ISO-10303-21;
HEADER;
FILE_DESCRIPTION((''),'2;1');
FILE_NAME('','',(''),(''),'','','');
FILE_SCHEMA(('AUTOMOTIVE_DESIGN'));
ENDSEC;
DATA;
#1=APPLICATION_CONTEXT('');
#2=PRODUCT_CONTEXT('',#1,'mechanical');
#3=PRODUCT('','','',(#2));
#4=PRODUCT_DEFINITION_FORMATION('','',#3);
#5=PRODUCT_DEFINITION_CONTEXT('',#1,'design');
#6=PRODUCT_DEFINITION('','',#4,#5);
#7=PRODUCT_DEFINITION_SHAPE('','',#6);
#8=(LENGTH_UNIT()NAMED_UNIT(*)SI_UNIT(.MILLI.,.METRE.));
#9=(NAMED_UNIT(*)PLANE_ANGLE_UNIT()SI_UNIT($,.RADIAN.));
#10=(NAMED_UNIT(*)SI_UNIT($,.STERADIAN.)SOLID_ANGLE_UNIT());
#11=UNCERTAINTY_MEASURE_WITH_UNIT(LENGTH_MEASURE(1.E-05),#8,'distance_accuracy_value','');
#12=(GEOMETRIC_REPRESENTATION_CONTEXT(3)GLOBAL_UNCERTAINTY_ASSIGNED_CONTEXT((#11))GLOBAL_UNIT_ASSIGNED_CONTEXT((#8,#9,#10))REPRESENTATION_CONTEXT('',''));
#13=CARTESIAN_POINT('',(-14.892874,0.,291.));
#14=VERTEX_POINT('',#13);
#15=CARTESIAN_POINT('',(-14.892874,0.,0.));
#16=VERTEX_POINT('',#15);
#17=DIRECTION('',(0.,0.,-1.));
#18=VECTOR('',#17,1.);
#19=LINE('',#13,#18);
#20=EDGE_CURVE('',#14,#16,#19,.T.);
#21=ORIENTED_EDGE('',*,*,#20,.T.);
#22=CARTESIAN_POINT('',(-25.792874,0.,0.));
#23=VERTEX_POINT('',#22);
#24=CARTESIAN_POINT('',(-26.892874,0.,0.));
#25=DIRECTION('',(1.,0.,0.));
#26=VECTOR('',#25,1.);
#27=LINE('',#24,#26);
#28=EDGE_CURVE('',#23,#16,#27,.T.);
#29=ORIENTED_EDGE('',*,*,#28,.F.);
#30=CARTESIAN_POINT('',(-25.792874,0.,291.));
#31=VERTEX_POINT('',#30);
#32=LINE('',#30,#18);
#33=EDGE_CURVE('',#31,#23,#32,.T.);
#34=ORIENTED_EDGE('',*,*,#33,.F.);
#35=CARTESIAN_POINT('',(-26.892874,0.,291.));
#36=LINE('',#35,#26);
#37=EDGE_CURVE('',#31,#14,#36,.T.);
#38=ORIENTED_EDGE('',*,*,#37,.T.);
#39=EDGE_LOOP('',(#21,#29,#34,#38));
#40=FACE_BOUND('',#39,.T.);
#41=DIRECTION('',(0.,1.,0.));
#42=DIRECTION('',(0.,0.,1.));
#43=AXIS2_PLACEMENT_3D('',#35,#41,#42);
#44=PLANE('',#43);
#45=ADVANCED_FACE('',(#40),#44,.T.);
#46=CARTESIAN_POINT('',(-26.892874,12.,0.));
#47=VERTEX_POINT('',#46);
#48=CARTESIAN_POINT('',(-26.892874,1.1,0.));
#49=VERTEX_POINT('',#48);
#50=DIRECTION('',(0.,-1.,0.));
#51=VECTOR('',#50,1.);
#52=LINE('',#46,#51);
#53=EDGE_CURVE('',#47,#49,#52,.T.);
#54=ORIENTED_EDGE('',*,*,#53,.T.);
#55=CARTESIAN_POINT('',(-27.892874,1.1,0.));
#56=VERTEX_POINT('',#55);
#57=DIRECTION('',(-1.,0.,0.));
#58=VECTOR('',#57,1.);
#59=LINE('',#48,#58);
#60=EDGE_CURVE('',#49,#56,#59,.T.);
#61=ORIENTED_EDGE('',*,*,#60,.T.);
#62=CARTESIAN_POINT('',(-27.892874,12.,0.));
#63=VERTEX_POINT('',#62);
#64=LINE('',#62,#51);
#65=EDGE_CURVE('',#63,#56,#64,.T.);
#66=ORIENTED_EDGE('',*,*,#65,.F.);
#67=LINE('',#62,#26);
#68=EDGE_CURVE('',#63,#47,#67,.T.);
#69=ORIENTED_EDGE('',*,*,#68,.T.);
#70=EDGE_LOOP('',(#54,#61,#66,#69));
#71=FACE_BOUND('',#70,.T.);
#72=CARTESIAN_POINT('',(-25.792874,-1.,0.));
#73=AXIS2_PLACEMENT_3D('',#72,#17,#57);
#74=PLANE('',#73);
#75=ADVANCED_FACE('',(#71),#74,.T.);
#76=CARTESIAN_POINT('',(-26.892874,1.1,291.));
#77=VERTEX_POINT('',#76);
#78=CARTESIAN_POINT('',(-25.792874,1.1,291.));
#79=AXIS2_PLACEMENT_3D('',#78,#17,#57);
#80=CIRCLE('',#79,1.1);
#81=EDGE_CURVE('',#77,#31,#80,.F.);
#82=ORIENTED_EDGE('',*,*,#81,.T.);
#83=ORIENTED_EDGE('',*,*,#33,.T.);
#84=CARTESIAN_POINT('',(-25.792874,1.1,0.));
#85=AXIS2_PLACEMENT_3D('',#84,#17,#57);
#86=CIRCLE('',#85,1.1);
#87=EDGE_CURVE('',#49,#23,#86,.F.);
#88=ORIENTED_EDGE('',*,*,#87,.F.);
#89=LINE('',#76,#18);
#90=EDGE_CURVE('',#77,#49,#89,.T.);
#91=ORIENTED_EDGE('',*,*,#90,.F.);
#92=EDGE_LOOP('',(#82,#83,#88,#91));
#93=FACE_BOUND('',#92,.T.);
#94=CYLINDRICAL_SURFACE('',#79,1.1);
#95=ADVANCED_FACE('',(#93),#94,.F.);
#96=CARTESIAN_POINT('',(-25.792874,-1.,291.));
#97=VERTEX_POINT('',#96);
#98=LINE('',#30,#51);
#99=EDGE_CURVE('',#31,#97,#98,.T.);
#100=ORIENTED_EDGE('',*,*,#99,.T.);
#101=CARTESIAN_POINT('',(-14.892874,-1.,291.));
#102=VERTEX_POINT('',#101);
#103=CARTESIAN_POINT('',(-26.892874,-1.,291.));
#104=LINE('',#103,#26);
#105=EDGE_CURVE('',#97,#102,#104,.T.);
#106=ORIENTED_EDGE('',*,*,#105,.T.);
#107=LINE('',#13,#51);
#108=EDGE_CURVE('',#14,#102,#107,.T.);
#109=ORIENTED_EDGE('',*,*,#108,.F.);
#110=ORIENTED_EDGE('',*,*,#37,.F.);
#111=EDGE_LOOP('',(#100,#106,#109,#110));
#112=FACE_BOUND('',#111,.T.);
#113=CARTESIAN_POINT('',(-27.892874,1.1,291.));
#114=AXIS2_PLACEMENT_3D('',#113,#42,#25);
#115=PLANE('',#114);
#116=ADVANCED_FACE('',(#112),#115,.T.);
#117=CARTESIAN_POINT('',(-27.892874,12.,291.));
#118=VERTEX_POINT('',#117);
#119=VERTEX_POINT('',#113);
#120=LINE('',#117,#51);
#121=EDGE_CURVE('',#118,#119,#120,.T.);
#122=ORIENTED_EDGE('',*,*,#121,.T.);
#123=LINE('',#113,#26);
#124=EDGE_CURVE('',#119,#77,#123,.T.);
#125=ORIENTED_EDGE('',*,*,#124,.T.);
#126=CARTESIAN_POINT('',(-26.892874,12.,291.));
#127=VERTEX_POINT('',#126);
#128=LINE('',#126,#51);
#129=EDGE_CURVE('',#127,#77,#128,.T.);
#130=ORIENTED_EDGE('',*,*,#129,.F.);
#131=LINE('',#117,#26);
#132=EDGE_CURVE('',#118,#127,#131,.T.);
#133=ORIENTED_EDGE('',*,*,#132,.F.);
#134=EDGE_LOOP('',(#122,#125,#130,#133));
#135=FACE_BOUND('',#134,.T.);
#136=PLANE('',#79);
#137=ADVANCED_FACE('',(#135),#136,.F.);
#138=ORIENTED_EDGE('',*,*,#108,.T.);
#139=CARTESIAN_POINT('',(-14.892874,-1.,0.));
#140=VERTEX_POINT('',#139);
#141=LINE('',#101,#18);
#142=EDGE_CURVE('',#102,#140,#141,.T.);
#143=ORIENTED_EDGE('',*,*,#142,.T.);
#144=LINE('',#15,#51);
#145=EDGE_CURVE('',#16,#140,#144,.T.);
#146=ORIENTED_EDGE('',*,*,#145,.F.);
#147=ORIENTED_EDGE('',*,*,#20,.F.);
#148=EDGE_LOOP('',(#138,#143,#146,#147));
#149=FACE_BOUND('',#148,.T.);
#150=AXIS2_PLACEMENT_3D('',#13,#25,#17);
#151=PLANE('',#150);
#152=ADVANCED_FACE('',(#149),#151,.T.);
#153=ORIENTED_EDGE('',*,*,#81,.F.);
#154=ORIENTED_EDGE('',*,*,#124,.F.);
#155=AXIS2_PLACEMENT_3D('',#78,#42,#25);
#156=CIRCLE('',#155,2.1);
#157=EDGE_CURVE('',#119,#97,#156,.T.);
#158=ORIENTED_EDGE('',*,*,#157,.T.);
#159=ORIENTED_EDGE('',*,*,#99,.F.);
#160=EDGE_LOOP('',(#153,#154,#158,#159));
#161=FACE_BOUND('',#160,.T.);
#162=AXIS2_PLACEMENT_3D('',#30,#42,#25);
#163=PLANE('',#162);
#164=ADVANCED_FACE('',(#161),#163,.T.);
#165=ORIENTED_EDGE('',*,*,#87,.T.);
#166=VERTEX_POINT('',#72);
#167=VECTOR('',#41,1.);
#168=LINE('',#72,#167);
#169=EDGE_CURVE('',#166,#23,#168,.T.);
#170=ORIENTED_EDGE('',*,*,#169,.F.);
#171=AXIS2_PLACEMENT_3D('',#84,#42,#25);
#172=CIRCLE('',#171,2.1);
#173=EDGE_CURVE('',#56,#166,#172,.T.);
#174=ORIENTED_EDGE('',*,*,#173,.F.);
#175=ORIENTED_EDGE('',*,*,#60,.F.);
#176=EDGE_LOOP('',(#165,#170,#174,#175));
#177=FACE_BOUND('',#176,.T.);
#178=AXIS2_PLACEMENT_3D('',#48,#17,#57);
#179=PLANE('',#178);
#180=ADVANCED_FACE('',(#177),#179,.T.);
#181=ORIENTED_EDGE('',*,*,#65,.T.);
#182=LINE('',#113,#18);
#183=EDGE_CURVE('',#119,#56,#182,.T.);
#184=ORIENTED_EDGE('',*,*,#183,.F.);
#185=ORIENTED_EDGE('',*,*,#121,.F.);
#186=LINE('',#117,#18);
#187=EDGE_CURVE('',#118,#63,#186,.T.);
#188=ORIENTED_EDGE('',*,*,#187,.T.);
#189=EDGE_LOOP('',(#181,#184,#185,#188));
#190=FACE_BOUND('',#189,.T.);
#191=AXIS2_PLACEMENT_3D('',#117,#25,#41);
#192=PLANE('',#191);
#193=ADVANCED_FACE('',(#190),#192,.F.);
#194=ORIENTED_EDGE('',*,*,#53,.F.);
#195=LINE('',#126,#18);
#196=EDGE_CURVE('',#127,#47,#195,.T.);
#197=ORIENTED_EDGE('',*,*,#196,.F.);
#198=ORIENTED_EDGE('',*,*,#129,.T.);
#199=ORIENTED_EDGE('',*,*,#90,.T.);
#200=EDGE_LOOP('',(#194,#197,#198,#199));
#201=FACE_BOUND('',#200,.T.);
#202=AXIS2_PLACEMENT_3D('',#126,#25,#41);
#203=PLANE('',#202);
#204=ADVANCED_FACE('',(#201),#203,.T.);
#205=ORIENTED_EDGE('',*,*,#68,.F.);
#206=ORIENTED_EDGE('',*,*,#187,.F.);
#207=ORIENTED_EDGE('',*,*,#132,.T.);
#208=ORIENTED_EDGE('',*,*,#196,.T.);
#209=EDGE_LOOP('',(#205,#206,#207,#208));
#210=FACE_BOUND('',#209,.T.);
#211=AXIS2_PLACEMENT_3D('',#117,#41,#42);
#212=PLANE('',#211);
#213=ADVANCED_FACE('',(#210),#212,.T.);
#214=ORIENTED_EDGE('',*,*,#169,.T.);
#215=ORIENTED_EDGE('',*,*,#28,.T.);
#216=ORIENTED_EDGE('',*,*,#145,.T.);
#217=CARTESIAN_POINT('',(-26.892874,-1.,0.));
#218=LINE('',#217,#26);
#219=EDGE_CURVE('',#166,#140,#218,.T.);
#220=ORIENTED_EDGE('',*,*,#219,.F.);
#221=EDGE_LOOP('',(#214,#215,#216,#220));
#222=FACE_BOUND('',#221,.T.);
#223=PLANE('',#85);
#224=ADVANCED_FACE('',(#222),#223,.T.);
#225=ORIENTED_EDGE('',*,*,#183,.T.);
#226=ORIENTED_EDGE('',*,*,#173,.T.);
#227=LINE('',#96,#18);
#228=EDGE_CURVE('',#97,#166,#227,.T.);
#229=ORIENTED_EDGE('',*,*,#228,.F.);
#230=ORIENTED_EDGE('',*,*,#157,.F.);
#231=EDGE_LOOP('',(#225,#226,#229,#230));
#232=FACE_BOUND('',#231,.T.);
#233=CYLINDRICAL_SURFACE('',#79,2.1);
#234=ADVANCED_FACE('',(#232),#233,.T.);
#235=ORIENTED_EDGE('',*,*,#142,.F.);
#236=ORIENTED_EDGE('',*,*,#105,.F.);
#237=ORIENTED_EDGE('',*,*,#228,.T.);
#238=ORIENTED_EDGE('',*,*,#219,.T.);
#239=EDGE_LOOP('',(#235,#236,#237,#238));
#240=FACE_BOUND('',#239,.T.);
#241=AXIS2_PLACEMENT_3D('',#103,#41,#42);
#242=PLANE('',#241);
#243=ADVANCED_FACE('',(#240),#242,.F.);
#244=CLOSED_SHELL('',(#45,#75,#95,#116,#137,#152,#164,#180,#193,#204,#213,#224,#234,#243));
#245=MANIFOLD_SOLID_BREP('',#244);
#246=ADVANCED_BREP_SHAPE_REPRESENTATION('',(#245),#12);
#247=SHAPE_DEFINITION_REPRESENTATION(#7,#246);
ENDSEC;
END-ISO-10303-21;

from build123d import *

# Parameters (mm, degrees)
SM_BASE_FLANGE_1_DEPTH = 291


# Sheet-metal steps are written as plain solids
with BuildPart() as part:
    # Sketch 1 → Базовая кромка1 (new body)
    with BuildSketch(Plane.XY):
        with BuildLine():
            Line((-26.892874013, 12), (-26.892874013, 1.1))
            ThreePointArc((-26.892874013, 1.1), (-26.570691472, 0.322182541), (-25.792874013, 0))
            Line((-25.792874013, 0), (-14.892874013, 0))
            Line((-14.892874013, 0), (-14.892874013, -1))
            Line((-14.892874013, -1), (-25.792874013, -1))
            ThreePointArc((-25.792874013, -1), (-27.277798253, -0.38492424), (-27.892874013, 1.1))
            Line((-27.892874013, 1.1), (-27.892874013, 12))
            Line((-27.892874013, 12), (-26.892874013, 12))
        make_face()
    extrude(amount=SM_BASE_FLANGE_1_DEPTH)


solid = part.part
